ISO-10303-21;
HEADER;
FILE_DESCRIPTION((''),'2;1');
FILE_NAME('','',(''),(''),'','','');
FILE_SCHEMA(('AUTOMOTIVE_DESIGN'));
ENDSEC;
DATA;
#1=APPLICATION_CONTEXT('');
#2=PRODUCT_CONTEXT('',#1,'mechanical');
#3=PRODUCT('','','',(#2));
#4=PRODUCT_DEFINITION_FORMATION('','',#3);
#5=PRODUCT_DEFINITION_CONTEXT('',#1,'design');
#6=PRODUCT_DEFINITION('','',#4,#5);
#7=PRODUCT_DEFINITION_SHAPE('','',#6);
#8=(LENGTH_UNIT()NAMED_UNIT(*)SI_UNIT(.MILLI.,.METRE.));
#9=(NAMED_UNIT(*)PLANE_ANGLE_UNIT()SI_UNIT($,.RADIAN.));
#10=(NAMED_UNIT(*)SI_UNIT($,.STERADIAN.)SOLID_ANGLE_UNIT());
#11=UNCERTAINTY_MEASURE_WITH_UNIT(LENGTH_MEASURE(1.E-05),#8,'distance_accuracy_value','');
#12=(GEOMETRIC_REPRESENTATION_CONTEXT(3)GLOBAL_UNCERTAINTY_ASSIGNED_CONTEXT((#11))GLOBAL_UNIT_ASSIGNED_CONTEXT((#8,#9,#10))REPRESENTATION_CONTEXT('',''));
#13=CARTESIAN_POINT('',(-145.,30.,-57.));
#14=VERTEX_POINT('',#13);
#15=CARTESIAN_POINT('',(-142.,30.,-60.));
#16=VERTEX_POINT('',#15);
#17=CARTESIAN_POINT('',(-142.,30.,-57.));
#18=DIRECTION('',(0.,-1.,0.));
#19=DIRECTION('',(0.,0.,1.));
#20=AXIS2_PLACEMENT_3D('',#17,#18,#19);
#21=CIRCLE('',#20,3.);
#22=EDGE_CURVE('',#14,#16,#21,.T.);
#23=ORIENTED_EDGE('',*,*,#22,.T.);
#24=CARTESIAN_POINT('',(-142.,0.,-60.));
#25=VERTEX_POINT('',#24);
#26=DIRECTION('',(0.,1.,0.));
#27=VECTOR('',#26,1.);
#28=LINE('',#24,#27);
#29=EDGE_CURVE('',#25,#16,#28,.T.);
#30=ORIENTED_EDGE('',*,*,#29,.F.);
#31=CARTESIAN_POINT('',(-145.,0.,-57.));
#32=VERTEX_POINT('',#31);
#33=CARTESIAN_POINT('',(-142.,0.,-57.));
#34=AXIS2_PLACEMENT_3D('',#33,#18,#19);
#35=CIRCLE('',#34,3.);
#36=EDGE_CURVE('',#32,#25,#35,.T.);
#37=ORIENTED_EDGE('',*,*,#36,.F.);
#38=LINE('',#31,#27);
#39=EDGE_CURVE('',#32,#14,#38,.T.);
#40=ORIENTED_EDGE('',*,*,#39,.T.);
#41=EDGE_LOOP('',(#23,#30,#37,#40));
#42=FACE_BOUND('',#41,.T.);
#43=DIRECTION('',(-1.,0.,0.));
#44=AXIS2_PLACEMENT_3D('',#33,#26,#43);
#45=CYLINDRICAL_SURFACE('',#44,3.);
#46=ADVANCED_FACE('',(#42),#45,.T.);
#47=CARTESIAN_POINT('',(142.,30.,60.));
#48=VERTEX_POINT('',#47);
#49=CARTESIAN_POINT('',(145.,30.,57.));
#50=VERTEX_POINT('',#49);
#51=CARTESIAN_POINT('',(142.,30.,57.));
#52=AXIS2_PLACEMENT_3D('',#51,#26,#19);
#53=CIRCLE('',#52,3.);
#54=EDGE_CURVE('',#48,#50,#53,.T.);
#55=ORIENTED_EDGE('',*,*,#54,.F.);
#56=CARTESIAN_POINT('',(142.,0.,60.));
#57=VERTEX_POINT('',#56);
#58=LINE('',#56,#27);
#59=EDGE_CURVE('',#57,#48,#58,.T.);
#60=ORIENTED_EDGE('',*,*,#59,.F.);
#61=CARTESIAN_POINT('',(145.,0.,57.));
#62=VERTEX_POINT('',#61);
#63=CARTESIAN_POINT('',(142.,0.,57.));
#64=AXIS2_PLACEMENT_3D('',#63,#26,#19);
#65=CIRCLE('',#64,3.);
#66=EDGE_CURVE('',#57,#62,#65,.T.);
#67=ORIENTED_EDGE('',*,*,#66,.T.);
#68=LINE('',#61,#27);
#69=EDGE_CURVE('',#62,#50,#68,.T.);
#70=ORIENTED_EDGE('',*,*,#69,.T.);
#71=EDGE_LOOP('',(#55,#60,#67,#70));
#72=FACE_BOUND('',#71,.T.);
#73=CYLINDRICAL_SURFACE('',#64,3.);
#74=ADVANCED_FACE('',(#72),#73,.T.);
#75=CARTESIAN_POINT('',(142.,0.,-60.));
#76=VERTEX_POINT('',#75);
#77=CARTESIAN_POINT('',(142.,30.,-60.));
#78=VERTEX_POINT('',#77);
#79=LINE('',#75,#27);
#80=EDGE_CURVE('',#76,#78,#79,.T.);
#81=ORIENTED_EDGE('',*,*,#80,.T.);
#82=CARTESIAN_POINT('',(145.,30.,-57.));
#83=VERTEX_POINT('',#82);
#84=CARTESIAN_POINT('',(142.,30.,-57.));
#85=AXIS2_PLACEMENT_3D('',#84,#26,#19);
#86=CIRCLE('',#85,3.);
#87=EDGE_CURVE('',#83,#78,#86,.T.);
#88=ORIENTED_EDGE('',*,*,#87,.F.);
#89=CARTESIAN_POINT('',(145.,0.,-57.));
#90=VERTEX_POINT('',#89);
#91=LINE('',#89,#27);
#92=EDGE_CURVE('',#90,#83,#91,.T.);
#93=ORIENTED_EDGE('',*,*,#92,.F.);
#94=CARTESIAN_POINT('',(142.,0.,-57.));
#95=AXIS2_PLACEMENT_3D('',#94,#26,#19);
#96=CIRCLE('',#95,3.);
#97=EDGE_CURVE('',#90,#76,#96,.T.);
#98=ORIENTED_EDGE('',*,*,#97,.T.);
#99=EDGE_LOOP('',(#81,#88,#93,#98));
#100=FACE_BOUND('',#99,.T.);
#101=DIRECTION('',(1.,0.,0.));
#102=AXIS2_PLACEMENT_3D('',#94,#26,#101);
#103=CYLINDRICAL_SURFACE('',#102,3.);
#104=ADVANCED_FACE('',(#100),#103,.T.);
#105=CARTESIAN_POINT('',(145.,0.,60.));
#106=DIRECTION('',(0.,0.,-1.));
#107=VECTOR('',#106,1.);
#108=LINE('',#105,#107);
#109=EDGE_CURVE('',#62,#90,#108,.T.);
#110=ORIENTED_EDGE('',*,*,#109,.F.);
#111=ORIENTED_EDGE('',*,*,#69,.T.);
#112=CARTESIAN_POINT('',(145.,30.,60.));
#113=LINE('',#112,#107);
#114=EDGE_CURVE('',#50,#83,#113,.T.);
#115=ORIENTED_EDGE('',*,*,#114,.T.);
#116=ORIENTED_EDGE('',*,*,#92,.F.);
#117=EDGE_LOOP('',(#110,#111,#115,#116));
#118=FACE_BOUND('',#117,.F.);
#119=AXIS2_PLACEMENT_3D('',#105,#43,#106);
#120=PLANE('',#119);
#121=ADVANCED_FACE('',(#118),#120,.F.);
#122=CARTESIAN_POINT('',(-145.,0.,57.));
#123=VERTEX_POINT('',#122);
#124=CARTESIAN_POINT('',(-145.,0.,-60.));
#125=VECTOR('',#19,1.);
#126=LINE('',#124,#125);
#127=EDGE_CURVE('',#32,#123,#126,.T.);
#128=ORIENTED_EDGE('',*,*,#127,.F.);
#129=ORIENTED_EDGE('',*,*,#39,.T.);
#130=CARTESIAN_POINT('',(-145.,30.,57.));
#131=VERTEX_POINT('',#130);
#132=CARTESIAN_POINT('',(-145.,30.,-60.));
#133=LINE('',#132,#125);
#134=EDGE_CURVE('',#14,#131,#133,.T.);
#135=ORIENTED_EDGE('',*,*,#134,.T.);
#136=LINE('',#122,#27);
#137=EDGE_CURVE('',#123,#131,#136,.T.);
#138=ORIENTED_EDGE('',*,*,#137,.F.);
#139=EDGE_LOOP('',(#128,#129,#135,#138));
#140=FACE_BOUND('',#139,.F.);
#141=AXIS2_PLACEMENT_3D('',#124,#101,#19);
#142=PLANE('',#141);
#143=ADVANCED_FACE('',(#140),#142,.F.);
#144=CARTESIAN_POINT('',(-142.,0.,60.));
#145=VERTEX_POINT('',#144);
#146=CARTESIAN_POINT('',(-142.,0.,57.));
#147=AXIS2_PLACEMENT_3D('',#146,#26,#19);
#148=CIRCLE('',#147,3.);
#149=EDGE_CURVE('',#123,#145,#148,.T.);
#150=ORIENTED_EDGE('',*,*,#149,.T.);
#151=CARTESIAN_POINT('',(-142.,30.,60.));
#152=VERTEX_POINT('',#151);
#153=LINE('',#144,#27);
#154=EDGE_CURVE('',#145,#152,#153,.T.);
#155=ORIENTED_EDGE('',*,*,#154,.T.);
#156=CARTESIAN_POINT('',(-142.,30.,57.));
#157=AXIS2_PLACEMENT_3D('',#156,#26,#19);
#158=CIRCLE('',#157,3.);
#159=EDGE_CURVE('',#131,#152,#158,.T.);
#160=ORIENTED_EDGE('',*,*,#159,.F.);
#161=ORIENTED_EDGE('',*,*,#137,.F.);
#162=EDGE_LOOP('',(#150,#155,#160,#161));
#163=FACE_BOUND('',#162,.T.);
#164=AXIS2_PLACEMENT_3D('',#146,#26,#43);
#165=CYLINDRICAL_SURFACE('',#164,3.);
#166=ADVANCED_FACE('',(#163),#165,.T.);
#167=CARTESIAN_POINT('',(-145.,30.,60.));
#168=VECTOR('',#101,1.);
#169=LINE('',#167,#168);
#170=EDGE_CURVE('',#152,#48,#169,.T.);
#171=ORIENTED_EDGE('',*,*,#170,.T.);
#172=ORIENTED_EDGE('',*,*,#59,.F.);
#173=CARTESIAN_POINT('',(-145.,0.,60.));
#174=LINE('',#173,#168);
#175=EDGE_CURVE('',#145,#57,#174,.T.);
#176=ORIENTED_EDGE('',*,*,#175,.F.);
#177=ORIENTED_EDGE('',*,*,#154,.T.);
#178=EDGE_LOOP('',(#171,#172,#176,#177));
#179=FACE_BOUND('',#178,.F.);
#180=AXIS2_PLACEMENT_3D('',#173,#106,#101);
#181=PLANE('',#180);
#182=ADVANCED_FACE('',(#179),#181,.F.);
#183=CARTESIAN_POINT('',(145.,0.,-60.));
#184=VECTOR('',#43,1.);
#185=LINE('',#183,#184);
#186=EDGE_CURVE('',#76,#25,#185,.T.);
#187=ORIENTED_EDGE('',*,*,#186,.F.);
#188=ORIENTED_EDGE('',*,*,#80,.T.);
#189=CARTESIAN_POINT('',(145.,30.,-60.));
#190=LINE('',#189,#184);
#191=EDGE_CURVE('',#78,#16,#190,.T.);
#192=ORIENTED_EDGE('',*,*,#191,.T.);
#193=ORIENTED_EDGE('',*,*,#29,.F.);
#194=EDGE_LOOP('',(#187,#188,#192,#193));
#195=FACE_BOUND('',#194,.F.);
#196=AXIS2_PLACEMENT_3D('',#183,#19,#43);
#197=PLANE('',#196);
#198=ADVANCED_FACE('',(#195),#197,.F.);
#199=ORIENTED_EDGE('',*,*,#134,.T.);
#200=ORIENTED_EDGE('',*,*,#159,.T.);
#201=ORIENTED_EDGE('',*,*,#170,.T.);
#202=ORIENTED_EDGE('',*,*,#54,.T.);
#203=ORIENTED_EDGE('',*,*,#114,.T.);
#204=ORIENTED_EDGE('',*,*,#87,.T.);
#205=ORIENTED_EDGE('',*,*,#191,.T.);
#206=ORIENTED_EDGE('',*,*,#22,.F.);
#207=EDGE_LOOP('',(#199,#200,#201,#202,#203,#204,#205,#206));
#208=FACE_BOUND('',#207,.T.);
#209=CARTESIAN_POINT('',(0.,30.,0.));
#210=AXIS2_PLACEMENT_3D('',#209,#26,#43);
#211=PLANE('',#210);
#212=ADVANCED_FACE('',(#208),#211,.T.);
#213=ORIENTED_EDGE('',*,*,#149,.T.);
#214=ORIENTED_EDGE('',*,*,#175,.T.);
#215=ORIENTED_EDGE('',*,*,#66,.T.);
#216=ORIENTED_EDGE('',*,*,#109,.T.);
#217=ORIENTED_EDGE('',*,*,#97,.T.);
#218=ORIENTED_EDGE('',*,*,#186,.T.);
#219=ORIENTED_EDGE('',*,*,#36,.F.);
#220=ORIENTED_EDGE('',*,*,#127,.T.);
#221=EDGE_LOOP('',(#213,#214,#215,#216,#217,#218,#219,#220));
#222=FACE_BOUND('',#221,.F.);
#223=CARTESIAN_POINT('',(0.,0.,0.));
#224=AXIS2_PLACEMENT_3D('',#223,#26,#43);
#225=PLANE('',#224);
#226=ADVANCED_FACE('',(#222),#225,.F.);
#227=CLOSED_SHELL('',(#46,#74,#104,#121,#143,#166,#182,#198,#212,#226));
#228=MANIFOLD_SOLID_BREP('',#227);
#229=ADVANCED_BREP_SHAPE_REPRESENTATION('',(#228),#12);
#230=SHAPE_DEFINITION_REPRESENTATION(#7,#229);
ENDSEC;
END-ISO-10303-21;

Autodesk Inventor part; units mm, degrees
ref_plane "YZ Plane" through (0, 0, 0) normal (1, 0, 0) x (0, 1, 0)
ref_plane "XZ Plane" through (0, 0, 0) normal (0, 1, 0) x (-1, 0, 0)
ref_plane "XY Plane" through (0, 0, 0) normal (0, 0, 1) x (1, 0, 0)
sketch "Sketch1" plane through (0, 0, 0) normal (0, 1, 0) x (-1, 0, 0)
  line L0 (145, 60) -> (-145, 60)
  line L1 (-145, 60) -> (-145, -60)
  line L2 (-145, -60) -> (145, -60)
  line L3 (145, -60) -> (145, 60)
  line L4 (145, 60) -> (-145, -60) construction
  line L5 (-145, 60) -> (145, -60) construction
  point P0 (0, 0)
  dimension "d0" = 290
  dimension "d1" = 120
extrude "Extrusion1" add sketch "Sketch1" along normal blind 30
fillet "Face Fillet1" radius 3 1 edges at (-145, 15, -60)
fillet "Face Fillet2" radius 3 1 edges at (-145, 15, 60)
fillet "Face Fillet3" radius 3 1 edges at (145, 15, 60)
fillet "Face Fillet4" radius 3 1 edges at (145, 15, -60)
properties part number "base_of_linear_drive"
